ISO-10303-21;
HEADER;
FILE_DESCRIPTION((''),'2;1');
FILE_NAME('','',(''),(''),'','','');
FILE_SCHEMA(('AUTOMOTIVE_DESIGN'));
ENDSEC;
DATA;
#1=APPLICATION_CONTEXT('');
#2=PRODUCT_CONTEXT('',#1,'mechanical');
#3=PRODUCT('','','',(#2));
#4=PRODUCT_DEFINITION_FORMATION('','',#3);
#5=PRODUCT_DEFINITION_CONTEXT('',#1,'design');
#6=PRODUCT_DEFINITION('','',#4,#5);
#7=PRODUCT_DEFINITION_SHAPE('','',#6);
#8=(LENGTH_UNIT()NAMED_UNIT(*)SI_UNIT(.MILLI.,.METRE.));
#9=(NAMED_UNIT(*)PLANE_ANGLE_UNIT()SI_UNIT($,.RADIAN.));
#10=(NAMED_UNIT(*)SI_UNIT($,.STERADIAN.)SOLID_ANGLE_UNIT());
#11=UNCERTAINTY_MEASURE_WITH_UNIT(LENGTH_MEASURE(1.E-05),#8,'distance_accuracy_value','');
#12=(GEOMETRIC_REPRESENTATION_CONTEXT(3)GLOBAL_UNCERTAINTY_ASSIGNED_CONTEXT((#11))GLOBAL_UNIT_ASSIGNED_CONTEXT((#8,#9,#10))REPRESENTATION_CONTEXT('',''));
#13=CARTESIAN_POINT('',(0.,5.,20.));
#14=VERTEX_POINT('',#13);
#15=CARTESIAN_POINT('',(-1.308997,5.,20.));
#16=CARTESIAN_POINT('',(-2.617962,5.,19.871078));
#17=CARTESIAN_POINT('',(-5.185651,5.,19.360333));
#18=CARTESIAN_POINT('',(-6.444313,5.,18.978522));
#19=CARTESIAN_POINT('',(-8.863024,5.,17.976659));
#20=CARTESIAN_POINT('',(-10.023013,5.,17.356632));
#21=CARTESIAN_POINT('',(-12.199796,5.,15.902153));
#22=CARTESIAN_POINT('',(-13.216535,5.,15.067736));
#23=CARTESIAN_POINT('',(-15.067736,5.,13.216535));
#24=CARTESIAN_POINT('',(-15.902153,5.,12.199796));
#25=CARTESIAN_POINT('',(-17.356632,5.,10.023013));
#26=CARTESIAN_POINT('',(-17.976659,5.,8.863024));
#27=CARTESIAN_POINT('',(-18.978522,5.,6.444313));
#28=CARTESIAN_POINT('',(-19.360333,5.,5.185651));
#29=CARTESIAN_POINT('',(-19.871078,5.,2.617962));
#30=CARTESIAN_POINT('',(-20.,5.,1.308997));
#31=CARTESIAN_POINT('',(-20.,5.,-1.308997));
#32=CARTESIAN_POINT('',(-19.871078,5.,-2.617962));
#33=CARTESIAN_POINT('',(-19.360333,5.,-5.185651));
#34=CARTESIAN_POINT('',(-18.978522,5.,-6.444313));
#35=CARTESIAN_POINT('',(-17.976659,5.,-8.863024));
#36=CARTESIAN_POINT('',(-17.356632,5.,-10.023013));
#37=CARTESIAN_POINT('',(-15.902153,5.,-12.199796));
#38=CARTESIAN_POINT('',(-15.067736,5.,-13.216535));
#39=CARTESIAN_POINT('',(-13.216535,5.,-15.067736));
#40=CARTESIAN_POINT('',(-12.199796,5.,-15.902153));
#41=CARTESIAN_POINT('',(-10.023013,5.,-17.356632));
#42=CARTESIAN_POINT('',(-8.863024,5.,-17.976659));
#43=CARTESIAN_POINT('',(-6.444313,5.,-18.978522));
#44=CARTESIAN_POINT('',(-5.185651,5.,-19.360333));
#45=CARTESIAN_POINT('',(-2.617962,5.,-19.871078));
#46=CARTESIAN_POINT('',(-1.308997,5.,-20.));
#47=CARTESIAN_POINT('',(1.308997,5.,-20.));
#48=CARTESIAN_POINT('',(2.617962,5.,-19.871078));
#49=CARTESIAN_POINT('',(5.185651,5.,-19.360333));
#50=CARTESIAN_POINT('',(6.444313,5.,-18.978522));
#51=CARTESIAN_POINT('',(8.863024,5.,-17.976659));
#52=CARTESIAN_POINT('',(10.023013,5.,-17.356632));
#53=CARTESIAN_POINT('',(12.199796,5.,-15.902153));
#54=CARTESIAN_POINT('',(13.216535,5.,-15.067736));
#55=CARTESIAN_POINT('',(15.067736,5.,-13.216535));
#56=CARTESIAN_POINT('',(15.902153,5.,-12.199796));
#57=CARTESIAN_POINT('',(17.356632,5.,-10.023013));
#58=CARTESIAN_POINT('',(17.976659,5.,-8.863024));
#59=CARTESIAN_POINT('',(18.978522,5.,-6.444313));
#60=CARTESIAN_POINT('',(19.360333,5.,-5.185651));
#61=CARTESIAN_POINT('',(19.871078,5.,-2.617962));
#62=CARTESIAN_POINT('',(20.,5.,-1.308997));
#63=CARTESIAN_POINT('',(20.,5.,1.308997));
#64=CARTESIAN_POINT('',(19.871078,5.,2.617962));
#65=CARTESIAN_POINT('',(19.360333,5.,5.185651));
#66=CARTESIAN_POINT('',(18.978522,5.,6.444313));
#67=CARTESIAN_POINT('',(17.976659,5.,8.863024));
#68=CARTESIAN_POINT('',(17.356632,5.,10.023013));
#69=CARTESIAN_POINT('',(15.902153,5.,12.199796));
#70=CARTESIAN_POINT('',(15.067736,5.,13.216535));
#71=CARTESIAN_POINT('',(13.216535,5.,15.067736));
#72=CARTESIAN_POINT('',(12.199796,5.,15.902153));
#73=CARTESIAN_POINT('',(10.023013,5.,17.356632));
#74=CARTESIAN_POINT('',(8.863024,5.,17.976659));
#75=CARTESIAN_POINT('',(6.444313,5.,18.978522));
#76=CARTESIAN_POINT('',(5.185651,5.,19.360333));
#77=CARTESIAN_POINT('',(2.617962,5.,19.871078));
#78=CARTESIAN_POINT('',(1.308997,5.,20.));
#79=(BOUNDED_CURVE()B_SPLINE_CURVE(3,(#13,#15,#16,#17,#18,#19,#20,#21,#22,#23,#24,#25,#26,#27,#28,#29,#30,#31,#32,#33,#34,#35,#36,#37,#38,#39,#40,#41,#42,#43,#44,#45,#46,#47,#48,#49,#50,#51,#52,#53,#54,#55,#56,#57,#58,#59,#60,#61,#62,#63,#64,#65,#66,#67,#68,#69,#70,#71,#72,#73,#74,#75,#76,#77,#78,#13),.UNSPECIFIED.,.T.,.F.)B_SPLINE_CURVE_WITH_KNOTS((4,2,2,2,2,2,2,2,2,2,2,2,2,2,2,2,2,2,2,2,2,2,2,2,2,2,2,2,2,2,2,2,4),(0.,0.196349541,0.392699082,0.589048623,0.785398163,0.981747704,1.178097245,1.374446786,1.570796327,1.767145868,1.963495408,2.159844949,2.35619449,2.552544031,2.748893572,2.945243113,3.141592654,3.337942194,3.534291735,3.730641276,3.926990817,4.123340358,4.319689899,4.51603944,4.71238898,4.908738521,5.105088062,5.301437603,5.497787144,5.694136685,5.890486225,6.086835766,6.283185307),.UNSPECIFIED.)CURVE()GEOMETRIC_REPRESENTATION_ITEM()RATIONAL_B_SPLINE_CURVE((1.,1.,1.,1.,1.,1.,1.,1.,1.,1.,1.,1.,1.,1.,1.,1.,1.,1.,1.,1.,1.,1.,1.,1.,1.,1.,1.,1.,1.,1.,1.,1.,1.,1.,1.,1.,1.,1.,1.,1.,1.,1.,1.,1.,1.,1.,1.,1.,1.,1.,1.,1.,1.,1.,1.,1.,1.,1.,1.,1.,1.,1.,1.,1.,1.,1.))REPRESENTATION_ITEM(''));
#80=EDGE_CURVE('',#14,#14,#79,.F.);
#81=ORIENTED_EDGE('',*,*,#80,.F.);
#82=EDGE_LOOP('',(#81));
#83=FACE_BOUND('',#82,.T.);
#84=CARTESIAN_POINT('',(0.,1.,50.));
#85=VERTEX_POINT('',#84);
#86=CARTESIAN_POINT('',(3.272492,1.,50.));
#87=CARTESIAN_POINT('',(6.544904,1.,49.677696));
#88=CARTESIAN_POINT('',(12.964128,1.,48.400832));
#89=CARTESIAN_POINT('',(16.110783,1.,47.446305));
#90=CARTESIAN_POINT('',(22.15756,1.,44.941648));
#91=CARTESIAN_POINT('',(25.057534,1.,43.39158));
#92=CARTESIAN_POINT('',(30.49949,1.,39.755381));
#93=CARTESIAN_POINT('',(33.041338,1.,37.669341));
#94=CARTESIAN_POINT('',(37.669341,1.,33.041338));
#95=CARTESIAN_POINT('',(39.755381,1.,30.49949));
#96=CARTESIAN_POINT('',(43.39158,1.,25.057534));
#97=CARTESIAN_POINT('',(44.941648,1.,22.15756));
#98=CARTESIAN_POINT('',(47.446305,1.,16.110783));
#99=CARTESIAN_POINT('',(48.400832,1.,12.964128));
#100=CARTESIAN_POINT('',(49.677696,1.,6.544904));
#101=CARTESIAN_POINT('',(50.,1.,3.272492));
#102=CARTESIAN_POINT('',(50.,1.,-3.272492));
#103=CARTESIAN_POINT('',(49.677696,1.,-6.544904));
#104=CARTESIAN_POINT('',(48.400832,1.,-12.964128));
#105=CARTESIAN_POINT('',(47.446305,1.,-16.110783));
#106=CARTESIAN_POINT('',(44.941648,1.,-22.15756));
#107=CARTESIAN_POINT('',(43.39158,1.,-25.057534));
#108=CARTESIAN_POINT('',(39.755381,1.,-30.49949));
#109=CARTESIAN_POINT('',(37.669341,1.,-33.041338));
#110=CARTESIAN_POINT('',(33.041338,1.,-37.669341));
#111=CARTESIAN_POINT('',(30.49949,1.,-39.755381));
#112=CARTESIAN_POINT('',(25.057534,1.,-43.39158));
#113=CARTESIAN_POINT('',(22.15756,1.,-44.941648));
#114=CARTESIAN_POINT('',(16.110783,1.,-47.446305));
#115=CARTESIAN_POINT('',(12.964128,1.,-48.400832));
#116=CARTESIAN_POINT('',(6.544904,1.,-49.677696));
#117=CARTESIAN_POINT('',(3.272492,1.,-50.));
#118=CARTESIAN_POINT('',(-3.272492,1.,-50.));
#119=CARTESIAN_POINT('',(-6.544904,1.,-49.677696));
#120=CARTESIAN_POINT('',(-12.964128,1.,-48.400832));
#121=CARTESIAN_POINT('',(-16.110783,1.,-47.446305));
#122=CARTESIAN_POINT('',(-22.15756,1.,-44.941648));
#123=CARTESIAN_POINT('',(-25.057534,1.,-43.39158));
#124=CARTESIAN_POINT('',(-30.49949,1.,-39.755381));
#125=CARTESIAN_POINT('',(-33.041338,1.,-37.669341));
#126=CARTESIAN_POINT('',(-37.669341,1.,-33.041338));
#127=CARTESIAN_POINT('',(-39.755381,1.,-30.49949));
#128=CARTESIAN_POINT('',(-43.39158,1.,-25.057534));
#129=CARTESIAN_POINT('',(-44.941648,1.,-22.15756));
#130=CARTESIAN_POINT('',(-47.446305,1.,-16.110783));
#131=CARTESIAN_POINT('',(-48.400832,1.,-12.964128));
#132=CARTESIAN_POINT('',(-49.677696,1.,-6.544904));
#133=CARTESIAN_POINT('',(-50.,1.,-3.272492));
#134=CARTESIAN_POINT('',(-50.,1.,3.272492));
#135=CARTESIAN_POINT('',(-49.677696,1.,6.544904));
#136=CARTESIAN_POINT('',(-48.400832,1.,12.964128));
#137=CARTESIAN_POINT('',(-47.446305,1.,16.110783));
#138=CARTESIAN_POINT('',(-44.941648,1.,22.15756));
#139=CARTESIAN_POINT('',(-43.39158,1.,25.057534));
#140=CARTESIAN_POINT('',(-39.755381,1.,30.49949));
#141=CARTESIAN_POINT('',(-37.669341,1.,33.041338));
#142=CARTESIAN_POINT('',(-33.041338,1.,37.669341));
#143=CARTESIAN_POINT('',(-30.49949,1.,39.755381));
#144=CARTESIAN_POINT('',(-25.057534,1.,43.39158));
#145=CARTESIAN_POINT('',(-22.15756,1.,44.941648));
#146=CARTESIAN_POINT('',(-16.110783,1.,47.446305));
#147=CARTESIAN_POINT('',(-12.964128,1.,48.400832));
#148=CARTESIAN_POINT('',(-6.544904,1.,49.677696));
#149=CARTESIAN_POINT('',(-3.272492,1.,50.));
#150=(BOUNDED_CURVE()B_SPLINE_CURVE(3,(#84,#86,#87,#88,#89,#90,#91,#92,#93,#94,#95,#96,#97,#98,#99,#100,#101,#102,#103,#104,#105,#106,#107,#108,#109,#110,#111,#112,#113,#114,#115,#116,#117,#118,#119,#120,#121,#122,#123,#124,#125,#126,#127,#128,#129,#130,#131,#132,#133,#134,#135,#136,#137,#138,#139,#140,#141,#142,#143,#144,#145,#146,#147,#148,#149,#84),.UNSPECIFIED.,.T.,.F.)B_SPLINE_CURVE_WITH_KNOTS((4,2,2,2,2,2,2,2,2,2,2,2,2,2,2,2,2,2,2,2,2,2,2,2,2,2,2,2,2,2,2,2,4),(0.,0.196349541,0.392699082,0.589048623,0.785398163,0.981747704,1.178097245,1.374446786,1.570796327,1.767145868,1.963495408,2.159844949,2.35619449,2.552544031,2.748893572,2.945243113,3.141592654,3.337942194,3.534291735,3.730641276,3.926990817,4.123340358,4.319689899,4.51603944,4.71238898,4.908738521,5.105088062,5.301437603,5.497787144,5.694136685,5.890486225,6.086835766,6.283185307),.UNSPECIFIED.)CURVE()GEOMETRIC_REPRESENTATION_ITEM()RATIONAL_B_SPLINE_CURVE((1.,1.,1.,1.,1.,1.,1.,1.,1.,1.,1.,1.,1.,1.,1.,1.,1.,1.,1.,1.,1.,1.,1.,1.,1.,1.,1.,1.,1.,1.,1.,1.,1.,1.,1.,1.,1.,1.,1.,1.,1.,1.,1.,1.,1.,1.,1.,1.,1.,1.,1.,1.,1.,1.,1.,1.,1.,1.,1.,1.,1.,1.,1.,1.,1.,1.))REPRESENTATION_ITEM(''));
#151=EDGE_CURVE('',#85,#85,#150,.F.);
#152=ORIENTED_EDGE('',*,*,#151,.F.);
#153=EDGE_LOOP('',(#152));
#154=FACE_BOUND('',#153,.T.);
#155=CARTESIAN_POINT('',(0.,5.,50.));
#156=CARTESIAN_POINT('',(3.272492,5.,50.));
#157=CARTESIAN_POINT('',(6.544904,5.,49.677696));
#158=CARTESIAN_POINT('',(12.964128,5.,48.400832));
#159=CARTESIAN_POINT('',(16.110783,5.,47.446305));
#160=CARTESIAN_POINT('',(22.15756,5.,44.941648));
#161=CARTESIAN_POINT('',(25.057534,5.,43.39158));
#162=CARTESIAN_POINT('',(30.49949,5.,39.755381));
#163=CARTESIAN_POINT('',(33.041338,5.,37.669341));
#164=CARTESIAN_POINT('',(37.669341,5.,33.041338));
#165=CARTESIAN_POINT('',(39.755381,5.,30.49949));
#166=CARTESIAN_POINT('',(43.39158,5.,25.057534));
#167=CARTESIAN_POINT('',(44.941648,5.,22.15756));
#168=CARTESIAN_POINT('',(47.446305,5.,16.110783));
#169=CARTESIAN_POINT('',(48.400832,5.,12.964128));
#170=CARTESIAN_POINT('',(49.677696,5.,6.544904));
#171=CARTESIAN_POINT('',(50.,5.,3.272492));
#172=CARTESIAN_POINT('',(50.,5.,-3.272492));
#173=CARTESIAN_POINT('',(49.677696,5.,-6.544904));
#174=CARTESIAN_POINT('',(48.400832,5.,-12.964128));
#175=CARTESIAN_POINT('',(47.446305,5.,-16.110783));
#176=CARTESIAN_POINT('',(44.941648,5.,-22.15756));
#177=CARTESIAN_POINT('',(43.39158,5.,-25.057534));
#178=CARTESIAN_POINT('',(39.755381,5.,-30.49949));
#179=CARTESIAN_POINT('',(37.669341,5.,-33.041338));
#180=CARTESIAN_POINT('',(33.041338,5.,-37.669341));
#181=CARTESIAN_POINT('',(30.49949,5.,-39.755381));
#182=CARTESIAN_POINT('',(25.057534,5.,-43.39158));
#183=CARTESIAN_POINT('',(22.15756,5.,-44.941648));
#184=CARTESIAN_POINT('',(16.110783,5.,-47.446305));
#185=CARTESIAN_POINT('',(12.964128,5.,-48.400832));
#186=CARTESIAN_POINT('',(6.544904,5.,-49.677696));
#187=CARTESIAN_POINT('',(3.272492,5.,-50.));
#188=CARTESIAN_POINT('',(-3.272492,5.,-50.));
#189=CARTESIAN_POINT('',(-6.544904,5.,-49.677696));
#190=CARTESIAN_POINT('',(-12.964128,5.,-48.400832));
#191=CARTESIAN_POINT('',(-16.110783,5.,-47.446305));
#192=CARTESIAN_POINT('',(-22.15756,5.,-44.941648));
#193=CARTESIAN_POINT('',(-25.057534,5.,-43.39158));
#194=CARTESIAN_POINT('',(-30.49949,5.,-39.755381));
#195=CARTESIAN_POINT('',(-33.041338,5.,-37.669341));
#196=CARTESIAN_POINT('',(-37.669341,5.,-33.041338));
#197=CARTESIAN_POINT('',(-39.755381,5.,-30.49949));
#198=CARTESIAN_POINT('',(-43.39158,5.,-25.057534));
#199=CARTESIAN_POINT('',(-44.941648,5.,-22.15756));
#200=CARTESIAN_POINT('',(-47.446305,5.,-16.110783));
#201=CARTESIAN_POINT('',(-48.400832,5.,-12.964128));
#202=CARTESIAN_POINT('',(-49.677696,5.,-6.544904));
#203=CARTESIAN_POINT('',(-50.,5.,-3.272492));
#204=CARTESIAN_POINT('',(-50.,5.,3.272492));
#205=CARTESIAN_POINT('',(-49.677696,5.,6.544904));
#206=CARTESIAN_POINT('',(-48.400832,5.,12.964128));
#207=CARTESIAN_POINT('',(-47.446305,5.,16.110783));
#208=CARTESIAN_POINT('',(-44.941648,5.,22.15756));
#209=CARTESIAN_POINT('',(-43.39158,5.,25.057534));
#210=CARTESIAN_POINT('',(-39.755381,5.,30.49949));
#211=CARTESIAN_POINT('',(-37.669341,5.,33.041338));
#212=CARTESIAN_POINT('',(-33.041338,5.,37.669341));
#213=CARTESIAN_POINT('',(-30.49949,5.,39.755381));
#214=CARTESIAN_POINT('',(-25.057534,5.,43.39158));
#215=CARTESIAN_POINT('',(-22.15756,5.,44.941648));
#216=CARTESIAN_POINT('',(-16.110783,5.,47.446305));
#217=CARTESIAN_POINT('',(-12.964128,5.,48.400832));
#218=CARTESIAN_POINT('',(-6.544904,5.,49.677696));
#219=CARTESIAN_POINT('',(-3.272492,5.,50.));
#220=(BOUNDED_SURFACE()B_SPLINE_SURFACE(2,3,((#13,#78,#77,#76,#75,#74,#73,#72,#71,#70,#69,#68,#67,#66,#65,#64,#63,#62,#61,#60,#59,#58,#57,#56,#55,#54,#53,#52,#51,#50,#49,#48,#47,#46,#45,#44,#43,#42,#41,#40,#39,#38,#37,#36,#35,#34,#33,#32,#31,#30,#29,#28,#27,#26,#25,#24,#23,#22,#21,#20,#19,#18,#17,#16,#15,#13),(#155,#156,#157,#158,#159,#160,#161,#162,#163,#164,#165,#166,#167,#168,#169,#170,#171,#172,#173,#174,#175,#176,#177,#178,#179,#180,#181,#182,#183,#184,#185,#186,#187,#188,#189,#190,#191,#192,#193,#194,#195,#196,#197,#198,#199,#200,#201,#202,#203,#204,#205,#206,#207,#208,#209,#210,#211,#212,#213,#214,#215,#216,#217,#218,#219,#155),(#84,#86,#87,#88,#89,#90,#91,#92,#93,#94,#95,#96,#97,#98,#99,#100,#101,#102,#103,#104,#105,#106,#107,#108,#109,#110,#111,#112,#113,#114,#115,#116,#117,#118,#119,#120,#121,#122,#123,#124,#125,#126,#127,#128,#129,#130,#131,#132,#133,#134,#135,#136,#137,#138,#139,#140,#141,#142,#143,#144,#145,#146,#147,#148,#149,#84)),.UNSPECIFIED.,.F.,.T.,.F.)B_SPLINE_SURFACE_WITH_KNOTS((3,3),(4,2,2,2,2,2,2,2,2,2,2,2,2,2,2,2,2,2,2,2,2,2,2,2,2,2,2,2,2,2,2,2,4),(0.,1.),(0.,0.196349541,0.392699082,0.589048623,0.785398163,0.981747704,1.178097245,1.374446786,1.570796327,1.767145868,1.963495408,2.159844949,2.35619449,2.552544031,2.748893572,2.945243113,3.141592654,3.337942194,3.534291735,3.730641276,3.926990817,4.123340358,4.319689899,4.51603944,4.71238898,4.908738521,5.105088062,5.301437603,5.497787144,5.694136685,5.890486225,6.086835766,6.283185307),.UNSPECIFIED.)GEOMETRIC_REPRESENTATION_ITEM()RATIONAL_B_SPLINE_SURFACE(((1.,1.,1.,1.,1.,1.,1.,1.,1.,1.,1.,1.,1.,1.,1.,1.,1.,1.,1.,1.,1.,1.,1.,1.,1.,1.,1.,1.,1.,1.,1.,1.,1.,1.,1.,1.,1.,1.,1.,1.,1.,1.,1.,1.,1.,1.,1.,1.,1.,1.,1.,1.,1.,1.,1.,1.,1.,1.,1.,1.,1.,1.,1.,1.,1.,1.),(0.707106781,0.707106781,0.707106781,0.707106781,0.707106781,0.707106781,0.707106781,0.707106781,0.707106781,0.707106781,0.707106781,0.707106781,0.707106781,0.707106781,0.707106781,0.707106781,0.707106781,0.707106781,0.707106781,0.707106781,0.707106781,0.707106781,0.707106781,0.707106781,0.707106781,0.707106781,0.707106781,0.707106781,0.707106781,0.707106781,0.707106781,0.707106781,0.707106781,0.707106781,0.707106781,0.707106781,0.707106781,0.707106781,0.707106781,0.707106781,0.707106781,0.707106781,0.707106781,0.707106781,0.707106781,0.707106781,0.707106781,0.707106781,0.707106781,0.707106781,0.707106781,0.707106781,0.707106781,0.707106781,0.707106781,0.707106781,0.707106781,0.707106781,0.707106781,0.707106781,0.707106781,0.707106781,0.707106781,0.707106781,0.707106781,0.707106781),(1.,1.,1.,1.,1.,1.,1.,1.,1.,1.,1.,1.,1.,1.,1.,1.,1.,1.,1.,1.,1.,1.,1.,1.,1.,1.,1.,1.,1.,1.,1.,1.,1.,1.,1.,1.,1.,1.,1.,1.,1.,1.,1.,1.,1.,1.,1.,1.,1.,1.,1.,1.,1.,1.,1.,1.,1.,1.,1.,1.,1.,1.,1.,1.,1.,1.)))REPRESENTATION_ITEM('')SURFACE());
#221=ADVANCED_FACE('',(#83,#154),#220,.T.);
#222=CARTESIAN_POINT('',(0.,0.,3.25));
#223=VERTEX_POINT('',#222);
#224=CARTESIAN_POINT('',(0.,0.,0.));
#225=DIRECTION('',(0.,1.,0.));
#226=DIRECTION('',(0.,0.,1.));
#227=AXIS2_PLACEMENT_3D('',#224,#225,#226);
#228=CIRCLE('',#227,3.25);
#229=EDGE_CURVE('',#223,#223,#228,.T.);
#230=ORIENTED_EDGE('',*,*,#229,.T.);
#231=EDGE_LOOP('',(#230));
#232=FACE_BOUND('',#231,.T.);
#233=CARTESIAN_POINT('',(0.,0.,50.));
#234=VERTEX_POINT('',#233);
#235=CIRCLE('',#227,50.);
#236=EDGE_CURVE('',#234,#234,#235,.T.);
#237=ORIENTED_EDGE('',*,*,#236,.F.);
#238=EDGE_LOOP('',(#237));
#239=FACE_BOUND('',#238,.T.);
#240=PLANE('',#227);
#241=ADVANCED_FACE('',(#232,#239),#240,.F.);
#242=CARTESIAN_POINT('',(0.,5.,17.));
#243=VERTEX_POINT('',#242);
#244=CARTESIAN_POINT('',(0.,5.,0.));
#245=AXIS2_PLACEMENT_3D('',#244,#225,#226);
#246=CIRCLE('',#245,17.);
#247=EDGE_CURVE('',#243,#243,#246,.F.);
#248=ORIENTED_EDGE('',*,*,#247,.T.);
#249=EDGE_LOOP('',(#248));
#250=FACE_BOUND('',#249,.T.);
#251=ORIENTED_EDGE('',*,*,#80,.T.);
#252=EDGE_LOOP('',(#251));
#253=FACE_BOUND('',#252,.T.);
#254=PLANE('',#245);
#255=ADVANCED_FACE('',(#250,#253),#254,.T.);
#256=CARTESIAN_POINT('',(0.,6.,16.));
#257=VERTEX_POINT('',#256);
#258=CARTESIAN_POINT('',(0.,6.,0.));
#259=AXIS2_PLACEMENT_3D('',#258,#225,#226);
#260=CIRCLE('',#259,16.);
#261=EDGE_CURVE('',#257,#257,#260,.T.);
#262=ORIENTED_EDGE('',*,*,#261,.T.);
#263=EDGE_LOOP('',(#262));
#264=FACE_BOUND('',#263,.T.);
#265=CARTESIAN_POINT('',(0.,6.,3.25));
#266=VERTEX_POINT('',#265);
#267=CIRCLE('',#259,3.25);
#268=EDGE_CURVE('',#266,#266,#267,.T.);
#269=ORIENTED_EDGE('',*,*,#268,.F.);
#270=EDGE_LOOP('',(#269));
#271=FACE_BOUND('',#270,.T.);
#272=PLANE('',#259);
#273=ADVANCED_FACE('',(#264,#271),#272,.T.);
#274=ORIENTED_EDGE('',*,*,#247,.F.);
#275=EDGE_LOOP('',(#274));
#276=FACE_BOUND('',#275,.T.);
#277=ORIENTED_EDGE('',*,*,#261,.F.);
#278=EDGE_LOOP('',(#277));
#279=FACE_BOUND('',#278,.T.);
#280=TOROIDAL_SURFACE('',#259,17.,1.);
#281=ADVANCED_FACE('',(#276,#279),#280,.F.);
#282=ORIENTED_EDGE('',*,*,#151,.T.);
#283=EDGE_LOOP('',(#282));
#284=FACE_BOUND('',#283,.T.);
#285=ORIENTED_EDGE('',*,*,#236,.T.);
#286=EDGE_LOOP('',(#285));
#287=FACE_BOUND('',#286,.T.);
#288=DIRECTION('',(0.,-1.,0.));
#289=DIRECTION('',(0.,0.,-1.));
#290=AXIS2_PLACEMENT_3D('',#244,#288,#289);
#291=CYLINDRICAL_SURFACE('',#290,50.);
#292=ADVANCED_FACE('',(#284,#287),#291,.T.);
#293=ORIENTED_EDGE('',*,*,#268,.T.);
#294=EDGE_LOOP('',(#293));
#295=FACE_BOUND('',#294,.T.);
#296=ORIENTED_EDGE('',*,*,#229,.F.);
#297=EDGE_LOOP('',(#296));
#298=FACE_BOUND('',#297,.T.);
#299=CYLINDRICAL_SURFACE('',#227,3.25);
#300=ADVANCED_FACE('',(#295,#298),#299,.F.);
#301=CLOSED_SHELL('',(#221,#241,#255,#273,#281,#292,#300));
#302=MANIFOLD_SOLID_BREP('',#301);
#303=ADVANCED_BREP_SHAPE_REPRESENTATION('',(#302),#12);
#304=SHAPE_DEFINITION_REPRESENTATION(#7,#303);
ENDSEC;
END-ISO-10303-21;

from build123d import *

# Parameters (mm, degrees)
SKETCH1_R           = 50
BOSS_EXTRUDE1_DEPTH = 5
SKETCH2_R           = 16
BOSS_EXTRUDE2_DEPTH = 1
SKETCH3_R           = 3.25
CUT_EXTRUDE1_DEPTH  = 71.964779997
FILLET1_R           = 1
FILLET2_SIZE        = 30
FILLET2_SIZE_2      = 4


# Some blends are built 0.0001 mm under size
with BuildPart() as part:
    # Sketch1 → Boss-Extrude1 (new body)
    with BuildSketch(Plane(origin=(0, 0, 0), x_dir=(1, 0, 0), z_dir=(0, 1, 0))):
        with Locations(Location((0, 0, 0), (0, 0, 270))):
            Circle(SKETCH1_R)
    extrude(amount=BOSS_EXTRUDE1_DEPTH)

    # Sketch2 → Boss-Extrude2 (add)
    with BuildSketch(Plane(origin=(0, 5, 0), x_dir=(1, 0, 0), z_dir=(0, 1, 0))):
        with Locations(Location((0, 0, 0), (0, 0, 270))):
            Circle(SKETCH2_R)
    extrude(amount=BOSS_EXTRUDE2_DEPTH)

    # Sketch3 → Cut-Extrude1 (cut, through all)
    with BuildSketch(Plane(origin=(0, 6, 0), x_dir=(1, 0, 0), z_dir=(0, 1, 0))):
        with Locations(Location((0, 0, 0), (0, 0, 270))):
            Circle(SKETCH3_R)
    extrude(amount=-CUT_EXTRUDE1_DEPTH, mode=Mode.SUBTRACT)

    # Fillet1
    fillet1_edges = [part.edges().sort_by_distance(p)[0] for p in [
        (0, 5, -16),
    ]]
    fillet(fillet1_edges, radius=FILLET1_R - 0.0001)  # a hair under: the kernel refuses the full size

    # Fillet2
    # an asymmetric fillet: 30, 4 mm, written as the material it takes off along each edge
    with BuildSketch(Plane(origin=(0, 5, 0), x_dir=(0, 0, 1), z_dir=(-1, 0, 0))) as fillet2_piece_1:
        with BuildLine():
            Bezier((50 - FILLET2_SIZE, 0), (50, 0), (50, -FILLET2_SIZE_2), weights=[1, 0.707106781, 1])
            Line((50, -FILLET2_SIZE_2), (50, 0))
            Line((50, 0), (50 - FILLET2_SIZE, 0))
        make_face()
    revolve(axis=Axis((0, 5, 0), (0, 1, 0)), mode=Mode.SUBTRACT)


solid = part.part
